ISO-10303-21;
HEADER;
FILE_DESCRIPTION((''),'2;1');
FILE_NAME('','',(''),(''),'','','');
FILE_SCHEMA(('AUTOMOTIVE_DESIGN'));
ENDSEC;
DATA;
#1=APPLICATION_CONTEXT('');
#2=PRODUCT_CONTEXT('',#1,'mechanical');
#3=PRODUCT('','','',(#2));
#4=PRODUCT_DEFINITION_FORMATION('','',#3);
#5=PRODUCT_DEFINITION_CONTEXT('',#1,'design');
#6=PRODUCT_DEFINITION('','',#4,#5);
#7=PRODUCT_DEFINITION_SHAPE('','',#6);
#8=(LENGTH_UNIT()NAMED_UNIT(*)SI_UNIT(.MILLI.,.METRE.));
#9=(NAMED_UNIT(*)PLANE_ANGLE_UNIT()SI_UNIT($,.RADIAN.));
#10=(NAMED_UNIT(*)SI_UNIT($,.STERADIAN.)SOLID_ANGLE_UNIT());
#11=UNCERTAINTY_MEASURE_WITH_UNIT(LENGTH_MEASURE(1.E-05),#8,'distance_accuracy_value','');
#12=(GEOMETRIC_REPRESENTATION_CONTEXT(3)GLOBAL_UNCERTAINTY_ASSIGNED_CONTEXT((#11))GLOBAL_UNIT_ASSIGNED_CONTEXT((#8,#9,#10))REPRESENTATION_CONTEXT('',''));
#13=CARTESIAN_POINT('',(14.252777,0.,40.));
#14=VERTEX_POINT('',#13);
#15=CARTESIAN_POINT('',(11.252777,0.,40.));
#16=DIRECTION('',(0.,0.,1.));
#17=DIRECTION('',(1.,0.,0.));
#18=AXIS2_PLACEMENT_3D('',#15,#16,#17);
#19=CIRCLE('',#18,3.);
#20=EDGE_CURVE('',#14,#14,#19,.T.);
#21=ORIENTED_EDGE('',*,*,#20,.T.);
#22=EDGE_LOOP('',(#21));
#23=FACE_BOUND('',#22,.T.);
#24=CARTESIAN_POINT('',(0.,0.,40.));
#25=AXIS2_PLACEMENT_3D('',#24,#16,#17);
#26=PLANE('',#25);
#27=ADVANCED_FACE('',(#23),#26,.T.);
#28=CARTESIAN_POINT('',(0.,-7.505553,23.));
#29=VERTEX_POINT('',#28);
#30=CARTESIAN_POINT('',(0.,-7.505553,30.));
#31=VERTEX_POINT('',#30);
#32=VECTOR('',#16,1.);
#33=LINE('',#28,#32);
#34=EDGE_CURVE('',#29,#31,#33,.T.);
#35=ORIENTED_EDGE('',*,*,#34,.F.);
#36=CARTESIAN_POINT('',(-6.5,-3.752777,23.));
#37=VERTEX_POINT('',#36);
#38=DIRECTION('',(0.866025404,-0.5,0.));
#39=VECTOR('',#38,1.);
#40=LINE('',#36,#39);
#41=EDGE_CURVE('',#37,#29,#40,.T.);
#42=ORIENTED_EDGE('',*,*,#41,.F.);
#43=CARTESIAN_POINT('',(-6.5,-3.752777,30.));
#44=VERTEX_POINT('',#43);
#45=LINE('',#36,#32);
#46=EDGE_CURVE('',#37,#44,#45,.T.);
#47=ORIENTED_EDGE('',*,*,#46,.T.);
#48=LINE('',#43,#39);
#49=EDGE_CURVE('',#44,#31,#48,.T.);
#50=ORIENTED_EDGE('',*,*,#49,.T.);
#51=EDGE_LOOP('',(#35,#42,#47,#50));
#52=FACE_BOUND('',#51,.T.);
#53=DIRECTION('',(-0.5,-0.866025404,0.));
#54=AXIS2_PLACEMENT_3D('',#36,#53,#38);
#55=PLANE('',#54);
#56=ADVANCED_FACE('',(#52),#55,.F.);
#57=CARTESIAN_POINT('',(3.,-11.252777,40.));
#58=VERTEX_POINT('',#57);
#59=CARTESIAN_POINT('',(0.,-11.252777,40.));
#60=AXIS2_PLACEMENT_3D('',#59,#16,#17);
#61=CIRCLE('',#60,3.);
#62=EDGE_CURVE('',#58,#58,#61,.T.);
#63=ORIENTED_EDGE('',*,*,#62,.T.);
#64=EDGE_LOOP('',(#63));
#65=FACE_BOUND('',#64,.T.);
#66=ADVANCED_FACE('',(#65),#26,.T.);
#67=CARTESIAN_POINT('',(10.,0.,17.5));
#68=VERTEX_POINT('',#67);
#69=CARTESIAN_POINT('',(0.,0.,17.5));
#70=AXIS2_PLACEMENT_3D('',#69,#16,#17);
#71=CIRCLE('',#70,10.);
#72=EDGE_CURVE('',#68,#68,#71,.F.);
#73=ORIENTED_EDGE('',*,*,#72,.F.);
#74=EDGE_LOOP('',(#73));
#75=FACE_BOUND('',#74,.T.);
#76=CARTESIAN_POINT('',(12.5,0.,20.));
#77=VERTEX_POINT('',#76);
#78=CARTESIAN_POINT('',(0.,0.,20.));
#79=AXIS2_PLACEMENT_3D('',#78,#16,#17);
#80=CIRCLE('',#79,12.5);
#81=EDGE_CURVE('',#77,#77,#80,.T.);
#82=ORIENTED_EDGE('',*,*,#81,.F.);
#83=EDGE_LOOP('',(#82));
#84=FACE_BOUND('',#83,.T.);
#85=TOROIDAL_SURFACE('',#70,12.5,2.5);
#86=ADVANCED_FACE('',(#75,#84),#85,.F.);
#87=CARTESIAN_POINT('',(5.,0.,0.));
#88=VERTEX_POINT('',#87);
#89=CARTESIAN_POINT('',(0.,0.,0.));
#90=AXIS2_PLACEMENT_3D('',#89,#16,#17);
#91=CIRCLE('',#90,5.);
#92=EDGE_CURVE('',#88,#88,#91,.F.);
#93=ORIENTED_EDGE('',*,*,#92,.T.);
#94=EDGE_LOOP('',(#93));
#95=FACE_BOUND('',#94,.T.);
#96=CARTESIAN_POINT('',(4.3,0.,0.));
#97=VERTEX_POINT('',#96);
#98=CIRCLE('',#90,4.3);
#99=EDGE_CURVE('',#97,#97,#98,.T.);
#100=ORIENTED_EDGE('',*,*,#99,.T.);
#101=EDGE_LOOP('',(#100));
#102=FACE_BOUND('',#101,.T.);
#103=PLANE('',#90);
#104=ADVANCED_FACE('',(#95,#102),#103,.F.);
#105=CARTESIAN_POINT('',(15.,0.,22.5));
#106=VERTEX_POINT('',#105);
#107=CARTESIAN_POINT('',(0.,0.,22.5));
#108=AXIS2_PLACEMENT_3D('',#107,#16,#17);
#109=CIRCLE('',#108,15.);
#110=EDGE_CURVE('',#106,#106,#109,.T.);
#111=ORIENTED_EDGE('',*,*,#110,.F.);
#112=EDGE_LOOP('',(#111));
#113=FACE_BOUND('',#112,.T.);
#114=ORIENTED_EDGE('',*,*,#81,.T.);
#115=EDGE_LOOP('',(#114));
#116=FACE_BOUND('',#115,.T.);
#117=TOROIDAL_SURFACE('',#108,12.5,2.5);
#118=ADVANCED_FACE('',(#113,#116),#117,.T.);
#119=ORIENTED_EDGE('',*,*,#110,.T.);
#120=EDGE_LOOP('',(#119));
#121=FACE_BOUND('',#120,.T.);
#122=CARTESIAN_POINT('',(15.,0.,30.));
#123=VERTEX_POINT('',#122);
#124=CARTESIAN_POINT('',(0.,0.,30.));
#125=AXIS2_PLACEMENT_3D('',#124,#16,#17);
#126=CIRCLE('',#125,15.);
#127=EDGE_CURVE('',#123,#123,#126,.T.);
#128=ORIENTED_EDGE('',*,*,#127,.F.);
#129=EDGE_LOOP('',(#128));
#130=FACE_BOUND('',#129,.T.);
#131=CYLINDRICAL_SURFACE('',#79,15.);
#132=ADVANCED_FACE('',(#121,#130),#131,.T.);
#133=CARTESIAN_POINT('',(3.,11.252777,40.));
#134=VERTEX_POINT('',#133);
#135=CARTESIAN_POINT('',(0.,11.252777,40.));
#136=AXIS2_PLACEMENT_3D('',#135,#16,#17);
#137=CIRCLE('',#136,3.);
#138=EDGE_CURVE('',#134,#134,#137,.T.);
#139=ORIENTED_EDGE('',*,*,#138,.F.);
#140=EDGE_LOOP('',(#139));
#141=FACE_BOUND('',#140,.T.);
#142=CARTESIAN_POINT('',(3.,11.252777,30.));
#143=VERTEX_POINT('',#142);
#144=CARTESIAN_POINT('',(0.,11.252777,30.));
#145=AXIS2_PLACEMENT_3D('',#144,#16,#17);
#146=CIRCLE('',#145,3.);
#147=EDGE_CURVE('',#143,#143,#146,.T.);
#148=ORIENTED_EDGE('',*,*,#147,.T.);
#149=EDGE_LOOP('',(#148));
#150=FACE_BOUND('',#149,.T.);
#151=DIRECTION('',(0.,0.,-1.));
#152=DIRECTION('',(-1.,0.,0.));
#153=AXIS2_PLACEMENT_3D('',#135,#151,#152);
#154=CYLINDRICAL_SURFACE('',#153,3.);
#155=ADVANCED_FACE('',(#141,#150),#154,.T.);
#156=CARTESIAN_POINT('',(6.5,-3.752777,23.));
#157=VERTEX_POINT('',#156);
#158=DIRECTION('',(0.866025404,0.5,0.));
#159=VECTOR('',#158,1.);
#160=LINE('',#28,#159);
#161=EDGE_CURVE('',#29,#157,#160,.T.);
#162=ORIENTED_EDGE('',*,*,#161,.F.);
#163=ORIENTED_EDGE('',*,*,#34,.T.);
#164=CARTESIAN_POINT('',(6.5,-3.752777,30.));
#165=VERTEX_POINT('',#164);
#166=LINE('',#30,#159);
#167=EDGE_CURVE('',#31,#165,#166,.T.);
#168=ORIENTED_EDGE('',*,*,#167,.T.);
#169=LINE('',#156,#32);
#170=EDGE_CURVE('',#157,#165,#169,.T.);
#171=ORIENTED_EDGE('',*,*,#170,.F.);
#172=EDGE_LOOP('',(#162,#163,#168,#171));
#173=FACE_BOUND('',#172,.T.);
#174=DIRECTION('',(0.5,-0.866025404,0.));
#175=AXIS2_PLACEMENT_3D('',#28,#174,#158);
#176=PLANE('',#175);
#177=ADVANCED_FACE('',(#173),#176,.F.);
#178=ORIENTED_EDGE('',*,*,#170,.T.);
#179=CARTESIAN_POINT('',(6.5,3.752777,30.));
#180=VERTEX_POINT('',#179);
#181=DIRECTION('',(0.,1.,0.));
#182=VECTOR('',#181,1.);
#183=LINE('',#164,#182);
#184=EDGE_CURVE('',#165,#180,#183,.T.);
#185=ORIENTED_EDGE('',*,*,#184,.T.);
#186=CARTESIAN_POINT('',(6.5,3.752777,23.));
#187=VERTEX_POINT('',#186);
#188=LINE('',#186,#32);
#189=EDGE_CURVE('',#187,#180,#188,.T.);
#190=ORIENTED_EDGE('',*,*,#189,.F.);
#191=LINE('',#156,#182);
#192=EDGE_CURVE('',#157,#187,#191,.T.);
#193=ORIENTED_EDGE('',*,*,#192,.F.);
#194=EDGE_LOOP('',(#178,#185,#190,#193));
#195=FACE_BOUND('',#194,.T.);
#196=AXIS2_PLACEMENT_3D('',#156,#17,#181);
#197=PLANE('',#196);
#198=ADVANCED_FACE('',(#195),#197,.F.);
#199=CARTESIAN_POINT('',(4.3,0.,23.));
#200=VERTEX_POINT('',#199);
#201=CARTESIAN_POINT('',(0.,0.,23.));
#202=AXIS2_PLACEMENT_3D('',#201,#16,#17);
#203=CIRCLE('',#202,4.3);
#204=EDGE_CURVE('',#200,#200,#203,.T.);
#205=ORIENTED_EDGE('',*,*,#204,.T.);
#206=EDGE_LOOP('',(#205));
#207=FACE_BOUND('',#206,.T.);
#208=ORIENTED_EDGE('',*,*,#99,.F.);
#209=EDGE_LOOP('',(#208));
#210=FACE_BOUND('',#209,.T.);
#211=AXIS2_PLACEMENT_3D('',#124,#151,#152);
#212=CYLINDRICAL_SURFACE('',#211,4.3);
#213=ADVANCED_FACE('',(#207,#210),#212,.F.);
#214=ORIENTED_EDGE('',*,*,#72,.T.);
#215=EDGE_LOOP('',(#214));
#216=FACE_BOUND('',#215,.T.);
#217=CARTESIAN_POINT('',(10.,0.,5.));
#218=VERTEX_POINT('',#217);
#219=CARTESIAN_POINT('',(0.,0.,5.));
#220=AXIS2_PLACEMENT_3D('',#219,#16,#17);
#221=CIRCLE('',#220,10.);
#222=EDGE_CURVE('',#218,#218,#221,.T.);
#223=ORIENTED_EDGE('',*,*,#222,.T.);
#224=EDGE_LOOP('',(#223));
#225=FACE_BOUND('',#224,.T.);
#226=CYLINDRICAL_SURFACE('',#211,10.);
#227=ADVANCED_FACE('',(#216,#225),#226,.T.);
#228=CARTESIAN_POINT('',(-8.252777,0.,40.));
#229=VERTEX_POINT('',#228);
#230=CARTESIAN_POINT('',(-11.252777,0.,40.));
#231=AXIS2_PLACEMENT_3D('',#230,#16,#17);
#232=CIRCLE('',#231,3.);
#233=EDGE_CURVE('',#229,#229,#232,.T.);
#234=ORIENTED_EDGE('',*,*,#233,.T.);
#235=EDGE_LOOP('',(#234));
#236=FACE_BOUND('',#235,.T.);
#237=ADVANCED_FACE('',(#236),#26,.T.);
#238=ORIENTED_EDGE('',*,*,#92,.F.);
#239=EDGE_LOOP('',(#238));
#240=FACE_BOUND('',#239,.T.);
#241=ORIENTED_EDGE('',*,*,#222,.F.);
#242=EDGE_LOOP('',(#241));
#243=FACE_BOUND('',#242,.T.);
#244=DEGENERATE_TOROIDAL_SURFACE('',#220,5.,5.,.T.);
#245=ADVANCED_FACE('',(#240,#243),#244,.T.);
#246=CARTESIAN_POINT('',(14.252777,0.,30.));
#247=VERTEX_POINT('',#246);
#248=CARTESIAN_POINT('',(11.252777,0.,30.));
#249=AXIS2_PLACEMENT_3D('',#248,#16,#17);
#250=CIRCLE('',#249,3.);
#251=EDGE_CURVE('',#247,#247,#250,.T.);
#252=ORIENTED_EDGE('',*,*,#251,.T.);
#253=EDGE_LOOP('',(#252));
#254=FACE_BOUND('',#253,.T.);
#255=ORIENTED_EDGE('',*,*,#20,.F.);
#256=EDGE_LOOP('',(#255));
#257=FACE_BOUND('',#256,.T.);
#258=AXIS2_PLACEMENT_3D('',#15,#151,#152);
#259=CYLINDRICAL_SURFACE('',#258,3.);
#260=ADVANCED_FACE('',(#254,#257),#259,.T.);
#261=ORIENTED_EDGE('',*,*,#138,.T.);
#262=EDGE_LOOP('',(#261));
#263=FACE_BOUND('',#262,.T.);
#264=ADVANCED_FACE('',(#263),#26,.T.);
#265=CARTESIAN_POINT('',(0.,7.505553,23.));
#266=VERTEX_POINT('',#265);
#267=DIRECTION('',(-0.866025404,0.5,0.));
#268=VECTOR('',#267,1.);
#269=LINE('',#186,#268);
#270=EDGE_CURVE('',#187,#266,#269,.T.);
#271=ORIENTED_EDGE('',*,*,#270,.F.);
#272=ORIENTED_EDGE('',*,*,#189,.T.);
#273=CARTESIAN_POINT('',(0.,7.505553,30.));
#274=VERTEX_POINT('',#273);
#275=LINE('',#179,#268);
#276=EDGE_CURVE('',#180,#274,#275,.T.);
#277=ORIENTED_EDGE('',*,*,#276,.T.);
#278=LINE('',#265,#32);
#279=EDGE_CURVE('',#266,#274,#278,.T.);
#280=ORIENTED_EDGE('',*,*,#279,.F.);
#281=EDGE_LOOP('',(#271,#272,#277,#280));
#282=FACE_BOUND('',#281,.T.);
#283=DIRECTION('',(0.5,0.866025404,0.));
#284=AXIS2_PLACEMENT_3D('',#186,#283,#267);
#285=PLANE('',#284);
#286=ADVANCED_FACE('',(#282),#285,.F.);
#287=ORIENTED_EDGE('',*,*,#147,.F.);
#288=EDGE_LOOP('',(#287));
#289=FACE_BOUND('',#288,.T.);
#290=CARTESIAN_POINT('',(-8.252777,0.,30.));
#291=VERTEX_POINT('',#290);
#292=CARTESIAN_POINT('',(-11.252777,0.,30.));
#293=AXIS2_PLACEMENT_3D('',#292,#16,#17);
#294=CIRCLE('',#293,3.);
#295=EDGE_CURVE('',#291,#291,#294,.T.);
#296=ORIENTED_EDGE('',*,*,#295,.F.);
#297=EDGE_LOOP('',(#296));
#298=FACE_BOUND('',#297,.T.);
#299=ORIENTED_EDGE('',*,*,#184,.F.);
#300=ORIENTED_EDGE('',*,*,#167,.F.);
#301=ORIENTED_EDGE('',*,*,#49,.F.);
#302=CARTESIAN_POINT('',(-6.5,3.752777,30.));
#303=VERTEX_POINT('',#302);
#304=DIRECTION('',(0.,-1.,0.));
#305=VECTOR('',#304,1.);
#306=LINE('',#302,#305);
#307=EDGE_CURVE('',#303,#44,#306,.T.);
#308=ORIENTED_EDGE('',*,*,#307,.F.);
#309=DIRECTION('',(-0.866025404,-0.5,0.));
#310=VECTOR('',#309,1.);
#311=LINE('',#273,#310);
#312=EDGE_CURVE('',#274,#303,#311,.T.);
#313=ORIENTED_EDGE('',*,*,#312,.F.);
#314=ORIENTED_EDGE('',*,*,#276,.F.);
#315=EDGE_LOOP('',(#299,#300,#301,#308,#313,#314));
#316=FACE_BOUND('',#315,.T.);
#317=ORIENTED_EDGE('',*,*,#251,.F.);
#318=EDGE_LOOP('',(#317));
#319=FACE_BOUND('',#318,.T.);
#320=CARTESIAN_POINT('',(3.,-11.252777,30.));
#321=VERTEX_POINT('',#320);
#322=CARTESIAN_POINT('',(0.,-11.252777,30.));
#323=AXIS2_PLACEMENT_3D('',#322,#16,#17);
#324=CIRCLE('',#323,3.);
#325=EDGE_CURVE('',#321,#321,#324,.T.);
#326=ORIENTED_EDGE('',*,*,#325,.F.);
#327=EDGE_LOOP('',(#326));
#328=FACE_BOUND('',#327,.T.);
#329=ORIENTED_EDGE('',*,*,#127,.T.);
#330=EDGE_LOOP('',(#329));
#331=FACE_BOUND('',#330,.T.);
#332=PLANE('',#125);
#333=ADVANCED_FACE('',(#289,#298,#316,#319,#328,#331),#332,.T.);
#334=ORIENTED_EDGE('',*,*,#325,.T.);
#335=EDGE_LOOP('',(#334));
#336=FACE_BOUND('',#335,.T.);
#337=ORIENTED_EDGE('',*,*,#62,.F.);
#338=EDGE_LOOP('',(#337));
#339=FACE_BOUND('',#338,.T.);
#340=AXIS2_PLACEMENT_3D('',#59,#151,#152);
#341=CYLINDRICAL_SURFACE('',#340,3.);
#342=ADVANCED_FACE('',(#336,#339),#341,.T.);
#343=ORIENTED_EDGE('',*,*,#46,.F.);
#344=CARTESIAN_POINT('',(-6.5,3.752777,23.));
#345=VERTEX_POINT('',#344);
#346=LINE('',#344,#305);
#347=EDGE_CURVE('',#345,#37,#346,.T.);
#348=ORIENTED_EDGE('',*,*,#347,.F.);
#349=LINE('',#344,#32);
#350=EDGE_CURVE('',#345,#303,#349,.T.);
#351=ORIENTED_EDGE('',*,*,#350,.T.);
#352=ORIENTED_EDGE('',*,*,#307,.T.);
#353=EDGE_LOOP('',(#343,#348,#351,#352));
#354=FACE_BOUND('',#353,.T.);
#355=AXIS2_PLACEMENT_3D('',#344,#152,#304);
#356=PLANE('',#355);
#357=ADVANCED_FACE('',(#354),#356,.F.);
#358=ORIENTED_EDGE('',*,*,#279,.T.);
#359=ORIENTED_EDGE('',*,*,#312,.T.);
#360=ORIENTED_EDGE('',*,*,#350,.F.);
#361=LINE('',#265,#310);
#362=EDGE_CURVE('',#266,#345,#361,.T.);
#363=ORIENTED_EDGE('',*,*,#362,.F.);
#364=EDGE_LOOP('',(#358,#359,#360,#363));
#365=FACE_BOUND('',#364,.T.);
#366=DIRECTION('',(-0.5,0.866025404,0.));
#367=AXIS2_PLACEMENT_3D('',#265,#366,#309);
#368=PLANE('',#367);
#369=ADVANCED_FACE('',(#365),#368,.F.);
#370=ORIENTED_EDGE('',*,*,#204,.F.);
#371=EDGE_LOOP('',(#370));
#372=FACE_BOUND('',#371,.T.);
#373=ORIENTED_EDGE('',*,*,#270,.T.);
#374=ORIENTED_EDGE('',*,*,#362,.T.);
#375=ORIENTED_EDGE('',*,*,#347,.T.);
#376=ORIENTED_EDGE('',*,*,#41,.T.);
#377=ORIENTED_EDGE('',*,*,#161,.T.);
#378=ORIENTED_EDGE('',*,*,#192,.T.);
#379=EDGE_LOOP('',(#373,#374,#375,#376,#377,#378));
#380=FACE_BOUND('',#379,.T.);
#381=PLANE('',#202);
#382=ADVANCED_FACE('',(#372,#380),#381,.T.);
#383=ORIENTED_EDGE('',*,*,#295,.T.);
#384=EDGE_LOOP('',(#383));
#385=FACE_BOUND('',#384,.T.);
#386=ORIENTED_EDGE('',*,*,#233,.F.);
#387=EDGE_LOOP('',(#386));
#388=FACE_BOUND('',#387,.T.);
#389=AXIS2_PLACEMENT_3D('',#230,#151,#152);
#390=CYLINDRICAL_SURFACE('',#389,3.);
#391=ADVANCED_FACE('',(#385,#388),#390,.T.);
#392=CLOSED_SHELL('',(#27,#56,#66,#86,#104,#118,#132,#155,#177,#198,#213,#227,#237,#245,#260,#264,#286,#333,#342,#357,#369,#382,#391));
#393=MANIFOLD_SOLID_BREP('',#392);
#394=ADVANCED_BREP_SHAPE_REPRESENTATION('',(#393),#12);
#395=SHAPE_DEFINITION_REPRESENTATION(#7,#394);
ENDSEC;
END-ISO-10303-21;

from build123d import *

# Parameters (mm, degrees)
SKETCH1_R           = 10
SKETCH1_R_2         = 4.3
BOSS_EXTRUDE2_DEPTH = 30
CUT_EXTRUDE1_DEPTH  = 7
BOSS_EXTRUDE3_START = -10
SKETCH3_R           = 15
SKETCH3_R_2         = 10
BOSS_EXTRUDE3_DEPTH = 10
FILLET1_R           = 2.5
FILLET2_R           = 5
SKETCH4_R           = 3
BOSS_EXTRUDE4_DEPTH = 10


with BuildPart() as part:
    # Sketch1 → Boss-Extrude2 (new body)
    with BuildSketch(Plane.XY):
        Circle(SKETCH1_R)
        Circle(SKETCH1_R_2, mode=Mode.SUBTRACT)
    extrude(amount=BOSS_EXTRUDE2_DEPTH)

    # Sketch2 → Cut-Extrude1 (cut)
    with BuildSketch(Plane.XY.offset(30)):
        Polygon((0, 7.505553499), (-6.5, 3.75277675), (-6.5, -3.75277675), (0, -7.505553499), (6.5, -3.75277675), (6.5, 3.75277675), align=None)
    extrude(amount=-CUT_EXTRUDE1_DEPTH, mode=Mode.SUBTRACT)

    # Sketch3 → Boss-Extrude3 (add)
    with BuildSketch(Plane.XY.offset(30).offset(BOSS_EXTRUDE3_START)):
        Circle(SKETCH3_R)
        Circle(SKETCH3_R_2, mode=Mode.SUBTRACT)
    extrude(amount=BOSS_EXTRUDE3_DEPTH)

    # Fillet1
    fillet1_edges = [part.edges().sort_by_distance(p)[0] for p in [
        (-10, 0, 20),
        (-15, 0, 20),
    ]]
    fillet(fillet1_edges, radius=FILLET1_R - 0.0001)  # a hair under: the kernel refuses the full size

    # Fillet2
    fillet2_edges = [part.edges().sort_by_distance(p)[0] for p in [
        (-10, 0, 0),
    ]]
    fillet(fillet2_edges, radius=FILLET2_R)

    # Sketch4 → Boss-Extrude4 (add)
    with BuildSketch(Plane.XY.offset(30)):
        with Locations((11.25277675, 0)):
            Circle(SKETCH4_R)
        with BuildLine():
            ThreePointArc((3, 11.25277675), (2.121320344, 13.374097093), (0, 14.25277675))
            Line((0, 14.25277675), (0, 8.25277675))
            ThreePointArc((0, 8.25277675), (2.121320344, 9.131456406), (3, 11.25277675))
        make_face()
        with BuildLine():
            Line((0, 8.25277675), (0, 14.25277675))
            ThreePointArc((0, 14.25277675), (-3, 11.25277675), (0, 8.25277675))
        make_face()
        with Locations((-11.25277675, 0)):
            Circle(SKETCH4_R)
        with Locations((0, -11.25277675)):
            Circle(SKETCH4_R)
    extrude(amount=BOSS_EXTRUDE4_DEPTH)


solid = part.part
